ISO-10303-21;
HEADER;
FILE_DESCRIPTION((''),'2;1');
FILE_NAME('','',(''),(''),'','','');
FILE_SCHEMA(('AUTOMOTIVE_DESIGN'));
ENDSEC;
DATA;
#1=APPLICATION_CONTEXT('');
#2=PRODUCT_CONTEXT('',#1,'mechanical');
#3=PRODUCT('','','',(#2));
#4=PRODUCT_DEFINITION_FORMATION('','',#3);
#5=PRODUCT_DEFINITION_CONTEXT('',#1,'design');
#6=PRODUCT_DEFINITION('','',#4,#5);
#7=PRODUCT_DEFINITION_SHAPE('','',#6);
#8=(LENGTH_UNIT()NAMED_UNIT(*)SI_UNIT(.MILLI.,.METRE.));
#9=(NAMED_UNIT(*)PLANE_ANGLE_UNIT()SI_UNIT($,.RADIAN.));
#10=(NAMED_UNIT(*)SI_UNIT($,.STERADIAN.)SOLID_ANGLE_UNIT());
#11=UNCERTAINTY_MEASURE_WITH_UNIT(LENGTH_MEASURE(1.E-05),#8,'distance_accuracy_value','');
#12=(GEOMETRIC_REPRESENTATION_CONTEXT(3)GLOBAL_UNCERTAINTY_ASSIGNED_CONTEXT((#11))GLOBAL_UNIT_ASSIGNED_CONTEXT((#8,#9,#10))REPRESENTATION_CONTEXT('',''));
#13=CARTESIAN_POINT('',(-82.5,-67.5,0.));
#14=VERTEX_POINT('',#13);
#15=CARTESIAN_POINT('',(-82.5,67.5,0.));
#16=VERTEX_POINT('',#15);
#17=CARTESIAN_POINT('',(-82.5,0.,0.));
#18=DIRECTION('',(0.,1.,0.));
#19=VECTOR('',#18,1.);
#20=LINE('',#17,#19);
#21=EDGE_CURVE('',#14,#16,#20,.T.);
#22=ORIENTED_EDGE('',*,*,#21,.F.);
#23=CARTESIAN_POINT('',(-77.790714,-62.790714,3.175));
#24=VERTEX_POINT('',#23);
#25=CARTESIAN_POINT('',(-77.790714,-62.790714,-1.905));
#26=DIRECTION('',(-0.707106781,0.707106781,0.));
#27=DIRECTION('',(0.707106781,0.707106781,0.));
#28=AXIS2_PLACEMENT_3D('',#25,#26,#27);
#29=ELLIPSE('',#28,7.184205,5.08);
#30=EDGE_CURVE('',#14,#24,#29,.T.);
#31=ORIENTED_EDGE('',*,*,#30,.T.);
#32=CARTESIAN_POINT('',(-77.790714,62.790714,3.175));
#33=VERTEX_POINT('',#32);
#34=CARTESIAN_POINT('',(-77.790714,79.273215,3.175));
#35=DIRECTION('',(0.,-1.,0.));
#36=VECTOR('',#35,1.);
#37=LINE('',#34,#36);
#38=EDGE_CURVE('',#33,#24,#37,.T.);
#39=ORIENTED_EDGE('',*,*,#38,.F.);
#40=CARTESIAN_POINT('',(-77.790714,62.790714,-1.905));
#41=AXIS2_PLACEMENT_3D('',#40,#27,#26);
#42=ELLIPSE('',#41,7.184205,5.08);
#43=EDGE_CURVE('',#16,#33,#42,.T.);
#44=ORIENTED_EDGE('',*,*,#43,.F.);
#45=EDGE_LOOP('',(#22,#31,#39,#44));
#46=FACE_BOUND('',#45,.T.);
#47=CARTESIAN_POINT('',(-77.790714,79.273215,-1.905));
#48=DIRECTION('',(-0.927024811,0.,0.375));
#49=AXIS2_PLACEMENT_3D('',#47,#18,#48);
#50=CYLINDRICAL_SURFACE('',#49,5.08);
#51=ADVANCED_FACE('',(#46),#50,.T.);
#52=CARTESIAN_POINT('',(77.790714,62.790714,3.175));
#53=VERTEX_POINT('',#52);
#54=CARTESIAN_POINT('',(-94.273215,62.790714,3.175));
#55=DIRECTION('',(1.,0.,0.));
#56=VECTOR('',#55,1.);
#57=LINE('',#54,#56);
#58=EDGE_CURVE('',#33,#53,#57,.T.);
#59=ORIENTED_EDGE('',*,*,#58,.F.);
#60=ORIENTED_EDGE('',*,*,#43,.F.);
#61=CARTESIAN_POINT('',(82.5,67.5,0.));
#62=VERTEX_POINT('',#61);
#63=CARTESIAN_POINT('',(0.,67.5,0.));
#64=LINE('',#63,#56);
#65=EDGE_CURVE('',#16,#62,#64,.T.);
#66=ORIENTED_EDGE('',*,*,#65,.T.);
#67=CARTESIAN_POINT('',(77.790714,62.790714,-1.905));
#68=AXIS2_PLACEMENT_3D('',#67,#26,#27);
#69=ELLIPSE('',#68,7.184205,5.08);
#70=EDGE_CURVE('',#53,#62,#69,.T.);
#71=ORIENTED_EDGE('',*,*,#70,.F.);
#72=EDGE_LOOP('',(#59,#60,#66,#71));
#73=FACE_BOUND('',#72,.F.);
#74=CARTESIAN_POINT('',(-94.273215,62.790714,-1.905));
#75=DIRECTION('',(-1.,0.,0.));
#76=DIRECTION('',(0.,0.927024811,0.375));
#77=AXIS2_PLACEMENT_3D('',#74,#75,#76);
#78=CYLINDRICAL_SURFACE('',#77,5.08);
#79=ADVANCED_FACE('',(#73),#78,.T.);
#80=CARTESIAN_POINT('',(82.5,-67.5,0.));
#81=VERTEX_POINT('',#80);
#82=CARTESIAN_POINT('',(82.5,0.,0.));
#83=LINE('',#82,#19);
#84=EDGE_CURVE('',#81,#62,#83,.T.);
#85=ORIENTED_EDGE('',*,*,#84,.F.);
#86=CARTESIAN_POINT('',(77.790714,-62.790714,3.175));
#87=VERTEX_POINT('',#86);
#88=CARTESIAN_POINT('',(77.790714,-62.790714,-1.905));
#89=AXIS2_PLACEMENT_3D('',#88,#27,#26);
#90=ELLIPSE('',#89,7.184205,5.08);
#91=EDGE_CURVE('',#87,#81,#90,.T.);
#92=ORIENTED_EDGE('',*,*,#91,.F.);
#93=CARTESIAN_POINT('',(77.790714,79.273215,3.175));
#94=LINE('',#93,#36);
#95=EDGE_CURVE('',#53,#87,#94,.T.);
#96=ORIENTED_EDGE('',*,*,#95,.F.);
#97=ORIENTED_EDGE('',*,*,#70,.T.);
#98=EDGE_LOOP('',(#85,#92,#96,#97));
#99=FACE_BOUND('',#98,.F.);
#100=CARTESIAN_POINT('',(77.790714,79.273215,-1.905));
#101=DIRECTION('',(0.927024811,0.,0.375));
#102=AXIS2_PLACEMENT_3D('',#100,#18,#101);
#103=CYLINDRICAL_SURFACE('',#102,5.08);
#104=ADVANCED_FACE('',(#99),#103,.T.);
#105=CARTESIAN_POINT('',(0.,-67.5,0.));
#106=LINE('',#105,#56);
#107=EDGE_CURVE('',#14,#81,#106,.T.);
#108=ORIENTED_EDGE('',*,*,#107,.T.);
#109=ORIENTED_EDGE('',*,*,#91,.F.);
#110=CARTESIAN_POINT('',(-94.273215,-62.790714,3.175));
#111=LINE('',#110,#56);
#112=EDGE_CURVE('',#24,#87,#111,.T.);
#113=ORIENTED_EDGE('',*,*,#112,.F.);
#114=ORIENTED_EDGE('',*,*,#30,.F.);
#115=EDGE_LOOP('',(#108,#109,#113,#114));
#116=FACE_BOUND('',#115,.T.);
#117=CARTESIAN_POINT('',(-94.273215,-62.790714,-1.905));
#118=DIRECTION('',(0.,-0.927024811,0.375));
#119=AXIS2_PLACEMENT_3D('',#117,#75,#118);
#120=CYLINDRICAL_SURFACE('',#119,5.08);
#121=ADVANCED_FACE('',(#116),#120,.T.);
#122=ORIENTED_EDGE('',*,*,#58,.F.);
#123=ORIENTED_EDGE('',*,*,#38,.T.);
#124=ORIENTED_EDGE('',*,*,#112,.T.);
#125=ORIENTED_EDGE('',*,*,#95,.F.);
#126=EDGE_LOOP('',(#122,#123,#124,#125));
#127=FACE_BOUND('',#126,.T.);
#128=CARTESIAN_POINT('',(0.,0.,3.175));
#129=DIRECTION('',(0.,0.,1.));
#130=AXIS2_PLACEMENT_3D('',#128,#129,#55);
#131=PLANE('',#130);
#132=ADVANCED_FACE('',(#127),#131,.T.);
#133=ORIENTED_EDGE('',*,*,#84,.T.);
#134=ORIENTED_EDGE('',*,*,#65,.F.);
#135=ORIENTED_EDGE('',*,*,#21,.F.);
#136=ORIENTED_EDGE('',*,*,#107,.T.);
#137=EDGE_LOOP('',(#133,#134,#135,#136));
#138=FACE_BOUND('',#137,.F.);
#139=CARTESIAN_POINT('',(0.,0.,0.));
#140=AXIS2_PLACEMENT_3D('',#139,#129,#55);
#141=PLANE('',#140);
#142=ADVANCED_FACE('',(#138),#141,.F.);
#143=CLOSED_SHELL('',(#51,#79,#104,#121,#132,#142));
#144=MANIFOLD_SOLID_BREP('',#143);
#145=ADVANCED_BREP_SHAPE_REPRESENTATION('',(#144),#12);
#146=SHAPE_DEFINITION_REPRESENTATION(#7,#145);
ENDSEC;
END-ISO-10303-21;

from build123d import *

# Parameters (mm, degrees)
F0_W        = 165
F0_H        = 135
F1_DEPTH    = 3.175
F2_T1_DEPTH = 158.5464301965
F2_T3_DEPTH = 188.5464301965


# Not quite as in the source:
# - a fillet or chamfer that OpenCascade refuses, or shapes differently, is made with other operations: its cross-section is extruded or revolved along the edge and cut away or added


with BuildPart() as f1:
    # F0 (on Top) → F1 (new body)
    with BuildSketch(Plane.XY):
        Rectangle(F0_W, F0_H)
    extrude(amount=F1_DEPTH)

    # F2: fillet of radius 5.08 on 4 edges, made by hand

    # F2_s2 → F2_t1 (cut)
    with BuildSketch(Plane.XZ.offset(-79.2732150983)):
        with BuildLine():
            ThreePointArc((-82.5, 0), (-80.6305202921, 2.3071134838), (-77.7907139607, 3.175))
            Line((-77.7907139607, 3.175), (-82.5, 3.175))
            Line((-82.5, 3.175), (-82.5, 0))
        make_face()
        with BuildLine():
            ThreePointArc((82.5, 0), (80.6305202921, 2.3071134838), (77.7907139607, 3.175))
            Line((77.7907139607, 3.175), (82.5, 3.175))
            Line((82.5, 3.175), (82.5, 0))
        make_face()
    extrude(amount=F2_T1_DEPTH, mode=Mode.SUBTRACT)

    # F2_s4 → F2_t3 (cut)
    with BuildSketch(Plane.YZ.offset(-94.2732150983)):
        with BuildLine():
            ThreePointArc((-67.5, 0), (-65.6305202921, 2.3071134838), (-62.7907139607, 3.175))
            Line((-62.7907139607, 3.175), (-67.5, 3.175))
            Line((-67.5, 3.175), (-67.5, 0))
        make_face()
        with BuildLine():
            ThreePointArc((67.5, 0), (65.6305202921, 2.3071134838), (62.7907139607, 3.175))
            Line((62.7907139607, 3.175), (67.5, 3.175))
            Line((67.5, 3.175), (67.5, 0))
        make_face()
    extrude(amount=F2_T3_DEPTH, mode=Mode.SUBTRACT)


solid = f1.part
